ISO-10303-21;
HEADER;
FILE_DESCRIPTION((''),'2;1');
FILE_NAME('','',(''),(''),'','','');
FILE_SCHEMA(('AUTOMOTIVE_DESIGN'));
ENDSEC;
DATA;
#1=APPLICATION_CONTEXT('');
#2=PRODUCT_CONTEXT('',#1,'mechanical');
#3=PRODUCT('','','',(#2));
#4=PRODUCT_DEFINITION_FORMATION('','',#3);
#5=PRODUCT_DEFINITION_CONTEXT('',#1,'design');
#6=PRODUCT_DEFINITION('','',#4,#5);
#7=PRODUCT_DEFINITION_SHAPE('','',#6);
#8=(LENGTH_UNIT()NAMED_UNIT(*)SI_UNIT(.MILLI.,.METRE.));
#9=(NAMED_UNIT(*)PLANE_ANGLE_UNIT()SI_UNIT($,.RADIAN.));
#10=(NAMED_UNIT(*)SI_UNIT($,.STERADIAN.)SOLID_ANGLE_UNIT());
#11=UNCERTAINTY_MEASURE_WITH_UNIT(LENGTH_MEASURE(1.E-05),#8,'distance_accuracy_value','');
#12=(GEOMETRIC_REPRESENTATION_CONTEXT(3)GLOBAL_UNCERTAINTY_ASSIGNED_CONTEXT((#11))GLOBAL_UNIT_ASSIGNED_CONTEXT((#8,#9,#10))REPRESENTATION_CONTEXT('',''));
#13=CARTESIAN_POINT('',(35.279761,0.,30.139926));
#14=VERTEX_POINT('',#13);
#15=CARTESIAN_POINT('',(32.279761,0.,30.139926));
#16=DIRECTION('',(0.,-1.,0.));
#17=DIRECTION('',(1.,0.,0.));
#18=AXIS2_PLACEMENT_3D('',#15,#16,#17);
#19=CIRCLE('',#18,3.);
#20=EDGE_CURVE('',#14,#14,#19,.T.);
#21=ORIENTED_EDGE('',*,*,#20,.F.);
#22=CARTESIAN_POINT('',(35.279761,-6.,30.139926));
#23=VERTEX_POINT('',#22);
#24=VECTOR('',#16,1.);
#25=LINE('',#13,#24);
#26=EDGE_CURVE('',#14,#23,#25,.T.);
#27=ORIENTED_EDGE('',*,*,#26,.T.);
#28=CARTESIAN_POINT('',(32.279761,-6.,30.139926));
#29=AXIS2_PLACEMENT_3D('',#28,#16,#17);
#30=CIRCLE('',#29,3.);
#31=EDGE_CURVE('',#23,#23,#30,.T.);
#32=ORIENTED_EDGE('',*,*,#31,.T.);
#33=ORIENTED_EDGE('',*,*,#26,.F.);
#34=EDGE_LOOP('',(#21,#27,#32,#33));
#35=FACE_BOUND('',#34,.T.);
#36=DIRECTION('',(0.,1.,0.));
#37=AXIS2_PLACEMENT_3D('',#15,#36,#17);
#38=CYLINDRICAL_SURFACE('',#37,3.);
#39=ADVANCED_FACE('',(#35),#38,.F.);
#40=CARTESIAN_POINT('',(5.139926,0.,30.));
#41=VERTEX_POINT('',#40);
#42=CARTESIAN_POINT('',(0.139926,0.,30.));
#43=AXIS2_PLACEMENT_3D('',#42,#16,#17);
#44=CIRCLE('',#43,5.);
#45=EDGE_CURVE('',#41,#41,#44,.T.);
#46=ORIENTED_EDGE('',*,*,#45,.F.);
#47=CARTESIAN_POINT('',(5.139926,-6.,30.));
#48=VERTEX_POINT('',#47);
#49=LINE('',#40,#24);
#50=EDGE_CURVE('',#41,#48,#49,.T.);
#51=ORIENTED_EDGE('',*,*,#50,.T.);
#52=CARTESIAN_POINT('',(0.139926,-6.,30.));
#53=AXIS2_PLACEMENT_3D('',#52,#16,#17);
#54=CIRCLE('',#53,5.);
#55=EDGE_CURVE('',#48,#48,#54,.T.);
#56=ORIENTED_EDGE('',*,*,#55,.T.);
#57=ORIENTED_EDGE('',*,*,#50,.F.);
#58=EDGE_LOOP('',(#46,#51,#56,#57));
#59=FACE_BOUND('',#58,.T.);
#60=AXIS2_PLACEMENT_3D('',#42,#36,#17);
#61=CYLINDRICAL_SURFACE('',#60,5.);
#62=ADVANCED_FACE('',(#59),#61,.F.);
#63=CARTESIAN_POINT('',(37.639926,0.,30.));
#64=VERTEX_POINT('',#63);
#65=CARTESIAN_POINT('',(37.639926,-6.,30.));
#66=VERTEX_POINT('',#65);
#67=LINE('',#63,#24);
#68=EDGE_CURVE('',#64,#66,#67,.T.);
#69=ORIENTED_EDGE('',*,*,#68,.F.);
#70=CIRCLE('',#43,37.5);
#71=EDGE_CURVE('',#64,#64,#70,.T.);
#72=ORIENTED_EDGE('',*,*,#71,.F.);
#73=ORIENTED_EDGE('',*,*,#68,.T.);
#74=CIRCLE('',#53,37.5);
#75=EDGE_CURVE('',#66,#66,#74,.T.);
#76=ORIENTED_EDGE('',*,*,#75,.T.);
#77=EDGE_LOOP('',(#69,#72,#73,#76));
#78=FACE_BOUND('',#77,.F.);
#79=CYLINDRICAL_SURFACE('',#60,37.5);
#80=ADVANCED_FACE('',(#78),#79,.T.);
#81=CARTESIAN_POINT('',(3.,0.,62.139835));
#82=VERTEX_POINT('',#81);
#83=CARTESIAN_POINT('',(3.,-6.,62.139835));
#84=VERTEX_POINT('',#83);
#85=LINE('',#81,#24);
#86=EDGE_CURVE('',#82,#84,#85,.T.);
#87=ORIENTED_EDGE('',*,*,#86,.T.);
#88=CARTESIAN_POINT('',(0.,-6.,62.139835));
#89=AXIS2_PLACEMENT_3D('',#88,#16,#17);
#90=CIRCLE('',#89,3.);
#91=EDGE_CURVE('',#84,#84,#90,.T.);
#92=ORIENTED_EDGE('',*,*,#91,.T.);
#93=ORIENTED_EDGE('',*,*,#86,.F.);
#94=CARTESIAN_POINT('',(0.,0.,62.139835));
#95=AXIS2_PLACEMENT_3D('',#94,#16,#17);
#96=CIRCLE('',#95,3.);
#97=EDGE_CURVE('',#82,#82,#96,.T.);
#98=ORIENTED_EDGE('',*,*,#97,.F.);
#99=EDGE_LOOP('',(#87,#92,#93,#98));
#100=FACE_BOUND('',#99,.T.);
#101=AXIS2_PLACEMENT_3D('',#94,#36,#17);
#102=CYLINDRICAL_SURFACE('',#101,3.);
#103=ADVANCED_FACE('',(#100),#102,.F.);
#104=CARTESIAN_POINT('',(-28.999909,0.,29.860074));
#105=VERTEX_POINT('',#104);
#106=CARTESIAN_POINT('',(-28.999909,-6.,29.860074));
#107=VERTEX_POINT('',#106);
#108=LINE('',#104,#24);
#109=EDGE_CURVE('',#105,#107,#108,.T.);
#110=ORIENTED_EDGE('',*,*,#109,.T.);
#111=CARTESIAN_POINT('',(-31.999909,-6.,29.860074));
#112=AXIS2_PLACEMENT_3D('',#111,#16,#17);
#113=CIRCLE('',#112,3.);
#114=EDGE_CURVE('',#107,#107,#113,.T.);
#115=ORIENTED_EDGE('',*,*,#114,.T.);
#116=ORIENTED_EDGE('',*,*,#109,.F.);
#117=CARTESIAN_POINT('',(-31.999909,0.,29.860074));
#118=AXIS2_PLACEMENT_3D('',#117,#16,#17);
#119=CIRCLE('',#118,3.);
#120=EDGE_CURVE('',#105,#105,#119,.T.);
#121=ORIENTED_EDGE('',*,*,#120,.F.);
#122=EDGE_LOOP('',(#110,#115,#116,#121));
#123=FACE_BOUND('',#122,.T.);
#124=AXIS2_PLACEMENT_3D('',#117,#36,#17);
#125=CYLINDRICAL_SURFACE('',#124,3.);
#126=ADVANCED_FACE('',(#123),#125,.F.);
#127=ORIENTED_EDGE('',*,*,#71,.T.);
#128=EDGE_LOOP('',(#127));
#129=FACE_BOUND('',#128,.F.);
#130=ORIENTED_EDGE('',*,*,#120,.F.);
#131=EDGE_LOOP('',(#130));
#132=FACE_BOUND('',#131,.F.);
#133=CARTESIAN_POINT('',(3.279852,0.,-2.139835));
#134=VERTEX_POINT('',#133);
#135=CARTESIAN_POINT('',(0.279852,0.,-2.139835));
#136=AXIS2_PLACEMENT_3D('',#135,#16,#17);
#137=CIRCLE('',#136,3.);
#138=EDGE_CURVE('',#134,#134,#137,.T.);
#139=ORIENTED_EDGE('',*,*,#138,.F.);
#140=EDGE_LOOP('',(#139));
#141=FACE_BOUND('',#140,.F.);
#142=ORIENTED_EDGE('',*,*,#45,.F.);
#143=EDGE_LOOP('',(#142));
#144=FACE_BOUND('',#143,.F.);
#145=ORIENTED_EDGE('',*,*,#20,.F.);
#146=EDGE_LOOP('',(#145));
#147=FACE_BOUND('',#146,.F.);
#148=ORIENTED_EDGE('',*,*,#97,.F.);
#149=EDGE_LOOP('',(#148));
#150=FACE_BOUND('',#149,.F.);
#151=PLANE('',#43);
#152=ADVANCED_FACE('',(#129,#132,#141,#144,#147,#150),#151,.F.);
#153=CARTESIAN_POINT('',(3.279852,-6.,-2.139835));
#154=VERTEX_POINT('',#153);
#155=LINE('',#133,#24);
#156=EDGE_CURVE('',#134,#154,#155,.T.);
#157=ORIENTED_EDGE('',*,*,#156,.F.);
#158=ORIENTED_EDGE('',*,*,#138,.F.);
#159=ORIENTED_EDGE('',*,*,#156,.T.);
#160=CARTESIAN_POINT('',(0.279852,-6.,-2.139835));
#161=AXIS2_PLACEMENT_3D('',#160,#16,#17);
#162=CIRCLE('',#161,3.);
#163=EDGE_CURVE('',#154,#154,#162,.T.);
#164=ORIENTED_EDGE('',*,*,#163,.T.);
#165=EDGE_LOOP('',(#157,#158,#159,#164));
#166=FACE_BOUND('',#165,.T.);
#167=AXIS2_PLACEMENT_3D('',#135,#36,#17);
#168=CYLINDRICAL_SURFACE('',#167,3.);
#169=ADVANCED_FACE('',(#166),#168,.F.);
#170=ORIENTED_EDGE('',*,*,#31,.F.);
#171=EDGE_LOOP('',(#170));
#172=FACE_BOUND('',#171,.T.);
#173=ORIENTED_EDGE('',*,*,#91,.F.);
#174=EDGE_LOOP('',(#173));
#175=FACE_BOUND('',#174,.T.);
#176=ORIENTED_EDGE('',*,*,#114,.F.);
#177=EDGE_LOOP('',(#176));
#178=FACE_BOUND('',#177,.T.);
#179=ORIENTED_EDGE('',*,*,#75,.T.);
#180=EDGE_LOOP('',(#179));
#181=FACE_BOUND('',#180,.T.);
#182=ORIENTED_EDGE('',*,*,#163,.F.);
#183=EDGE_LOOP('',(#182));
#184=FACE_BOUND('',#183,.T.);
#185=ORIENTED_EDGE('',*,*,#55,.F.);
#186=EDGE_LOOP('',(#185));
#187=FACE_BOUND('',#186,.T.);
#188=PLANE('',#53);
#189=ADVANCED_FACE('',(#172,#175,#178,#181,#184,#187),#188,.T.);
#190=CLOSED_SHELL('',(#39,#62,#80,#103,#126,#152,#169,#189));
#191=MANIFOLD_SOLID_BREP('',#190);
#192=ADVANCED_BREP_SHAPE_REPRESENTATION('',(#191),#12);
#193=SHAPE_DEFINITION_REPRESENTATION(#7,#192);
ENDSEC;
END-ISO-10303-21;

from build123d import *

# Parameters (mm, degrees)
F0_R     = 37.5
F0_R_2   = 3
F0_R_3   = 5
F1_DEPTH = 6


# Not quite as in the source:
# - a feature names something its author has since deleted; it is built from what else it names


with BuildPart() as f1:
    # F0 (on Front) → F1 (new body)
    with BuildSketch(Plane.XZ):
        with Locations((0.1399259764, 30)):
            Circle(F0_R)
        with Locations((-31.9999092322, 29.8600740236)):
            Circle(F0_R_2, mode=Mode.SUBTRACT)
        with Locations((0.2798519529, -2.1398352087)):
            Circle(F0_R_2, mode=Mode.SUBTRACT)
        with Locations((0, 62.1398352087)):
            Circle(F0_R_2, mode=Mode.SUBTRACT)
        with Locations((0.1399259764, 30)):
            Circle(F0_R_3, mode=Mode.SUBTRACT)
        with Locations((32.2797611851, 30.1399259764)):
            Circle(F0_R_2, mode=Mode.SUBTRACT)
    extrude(amount=F1_DEPTH)


solid = f1.part
